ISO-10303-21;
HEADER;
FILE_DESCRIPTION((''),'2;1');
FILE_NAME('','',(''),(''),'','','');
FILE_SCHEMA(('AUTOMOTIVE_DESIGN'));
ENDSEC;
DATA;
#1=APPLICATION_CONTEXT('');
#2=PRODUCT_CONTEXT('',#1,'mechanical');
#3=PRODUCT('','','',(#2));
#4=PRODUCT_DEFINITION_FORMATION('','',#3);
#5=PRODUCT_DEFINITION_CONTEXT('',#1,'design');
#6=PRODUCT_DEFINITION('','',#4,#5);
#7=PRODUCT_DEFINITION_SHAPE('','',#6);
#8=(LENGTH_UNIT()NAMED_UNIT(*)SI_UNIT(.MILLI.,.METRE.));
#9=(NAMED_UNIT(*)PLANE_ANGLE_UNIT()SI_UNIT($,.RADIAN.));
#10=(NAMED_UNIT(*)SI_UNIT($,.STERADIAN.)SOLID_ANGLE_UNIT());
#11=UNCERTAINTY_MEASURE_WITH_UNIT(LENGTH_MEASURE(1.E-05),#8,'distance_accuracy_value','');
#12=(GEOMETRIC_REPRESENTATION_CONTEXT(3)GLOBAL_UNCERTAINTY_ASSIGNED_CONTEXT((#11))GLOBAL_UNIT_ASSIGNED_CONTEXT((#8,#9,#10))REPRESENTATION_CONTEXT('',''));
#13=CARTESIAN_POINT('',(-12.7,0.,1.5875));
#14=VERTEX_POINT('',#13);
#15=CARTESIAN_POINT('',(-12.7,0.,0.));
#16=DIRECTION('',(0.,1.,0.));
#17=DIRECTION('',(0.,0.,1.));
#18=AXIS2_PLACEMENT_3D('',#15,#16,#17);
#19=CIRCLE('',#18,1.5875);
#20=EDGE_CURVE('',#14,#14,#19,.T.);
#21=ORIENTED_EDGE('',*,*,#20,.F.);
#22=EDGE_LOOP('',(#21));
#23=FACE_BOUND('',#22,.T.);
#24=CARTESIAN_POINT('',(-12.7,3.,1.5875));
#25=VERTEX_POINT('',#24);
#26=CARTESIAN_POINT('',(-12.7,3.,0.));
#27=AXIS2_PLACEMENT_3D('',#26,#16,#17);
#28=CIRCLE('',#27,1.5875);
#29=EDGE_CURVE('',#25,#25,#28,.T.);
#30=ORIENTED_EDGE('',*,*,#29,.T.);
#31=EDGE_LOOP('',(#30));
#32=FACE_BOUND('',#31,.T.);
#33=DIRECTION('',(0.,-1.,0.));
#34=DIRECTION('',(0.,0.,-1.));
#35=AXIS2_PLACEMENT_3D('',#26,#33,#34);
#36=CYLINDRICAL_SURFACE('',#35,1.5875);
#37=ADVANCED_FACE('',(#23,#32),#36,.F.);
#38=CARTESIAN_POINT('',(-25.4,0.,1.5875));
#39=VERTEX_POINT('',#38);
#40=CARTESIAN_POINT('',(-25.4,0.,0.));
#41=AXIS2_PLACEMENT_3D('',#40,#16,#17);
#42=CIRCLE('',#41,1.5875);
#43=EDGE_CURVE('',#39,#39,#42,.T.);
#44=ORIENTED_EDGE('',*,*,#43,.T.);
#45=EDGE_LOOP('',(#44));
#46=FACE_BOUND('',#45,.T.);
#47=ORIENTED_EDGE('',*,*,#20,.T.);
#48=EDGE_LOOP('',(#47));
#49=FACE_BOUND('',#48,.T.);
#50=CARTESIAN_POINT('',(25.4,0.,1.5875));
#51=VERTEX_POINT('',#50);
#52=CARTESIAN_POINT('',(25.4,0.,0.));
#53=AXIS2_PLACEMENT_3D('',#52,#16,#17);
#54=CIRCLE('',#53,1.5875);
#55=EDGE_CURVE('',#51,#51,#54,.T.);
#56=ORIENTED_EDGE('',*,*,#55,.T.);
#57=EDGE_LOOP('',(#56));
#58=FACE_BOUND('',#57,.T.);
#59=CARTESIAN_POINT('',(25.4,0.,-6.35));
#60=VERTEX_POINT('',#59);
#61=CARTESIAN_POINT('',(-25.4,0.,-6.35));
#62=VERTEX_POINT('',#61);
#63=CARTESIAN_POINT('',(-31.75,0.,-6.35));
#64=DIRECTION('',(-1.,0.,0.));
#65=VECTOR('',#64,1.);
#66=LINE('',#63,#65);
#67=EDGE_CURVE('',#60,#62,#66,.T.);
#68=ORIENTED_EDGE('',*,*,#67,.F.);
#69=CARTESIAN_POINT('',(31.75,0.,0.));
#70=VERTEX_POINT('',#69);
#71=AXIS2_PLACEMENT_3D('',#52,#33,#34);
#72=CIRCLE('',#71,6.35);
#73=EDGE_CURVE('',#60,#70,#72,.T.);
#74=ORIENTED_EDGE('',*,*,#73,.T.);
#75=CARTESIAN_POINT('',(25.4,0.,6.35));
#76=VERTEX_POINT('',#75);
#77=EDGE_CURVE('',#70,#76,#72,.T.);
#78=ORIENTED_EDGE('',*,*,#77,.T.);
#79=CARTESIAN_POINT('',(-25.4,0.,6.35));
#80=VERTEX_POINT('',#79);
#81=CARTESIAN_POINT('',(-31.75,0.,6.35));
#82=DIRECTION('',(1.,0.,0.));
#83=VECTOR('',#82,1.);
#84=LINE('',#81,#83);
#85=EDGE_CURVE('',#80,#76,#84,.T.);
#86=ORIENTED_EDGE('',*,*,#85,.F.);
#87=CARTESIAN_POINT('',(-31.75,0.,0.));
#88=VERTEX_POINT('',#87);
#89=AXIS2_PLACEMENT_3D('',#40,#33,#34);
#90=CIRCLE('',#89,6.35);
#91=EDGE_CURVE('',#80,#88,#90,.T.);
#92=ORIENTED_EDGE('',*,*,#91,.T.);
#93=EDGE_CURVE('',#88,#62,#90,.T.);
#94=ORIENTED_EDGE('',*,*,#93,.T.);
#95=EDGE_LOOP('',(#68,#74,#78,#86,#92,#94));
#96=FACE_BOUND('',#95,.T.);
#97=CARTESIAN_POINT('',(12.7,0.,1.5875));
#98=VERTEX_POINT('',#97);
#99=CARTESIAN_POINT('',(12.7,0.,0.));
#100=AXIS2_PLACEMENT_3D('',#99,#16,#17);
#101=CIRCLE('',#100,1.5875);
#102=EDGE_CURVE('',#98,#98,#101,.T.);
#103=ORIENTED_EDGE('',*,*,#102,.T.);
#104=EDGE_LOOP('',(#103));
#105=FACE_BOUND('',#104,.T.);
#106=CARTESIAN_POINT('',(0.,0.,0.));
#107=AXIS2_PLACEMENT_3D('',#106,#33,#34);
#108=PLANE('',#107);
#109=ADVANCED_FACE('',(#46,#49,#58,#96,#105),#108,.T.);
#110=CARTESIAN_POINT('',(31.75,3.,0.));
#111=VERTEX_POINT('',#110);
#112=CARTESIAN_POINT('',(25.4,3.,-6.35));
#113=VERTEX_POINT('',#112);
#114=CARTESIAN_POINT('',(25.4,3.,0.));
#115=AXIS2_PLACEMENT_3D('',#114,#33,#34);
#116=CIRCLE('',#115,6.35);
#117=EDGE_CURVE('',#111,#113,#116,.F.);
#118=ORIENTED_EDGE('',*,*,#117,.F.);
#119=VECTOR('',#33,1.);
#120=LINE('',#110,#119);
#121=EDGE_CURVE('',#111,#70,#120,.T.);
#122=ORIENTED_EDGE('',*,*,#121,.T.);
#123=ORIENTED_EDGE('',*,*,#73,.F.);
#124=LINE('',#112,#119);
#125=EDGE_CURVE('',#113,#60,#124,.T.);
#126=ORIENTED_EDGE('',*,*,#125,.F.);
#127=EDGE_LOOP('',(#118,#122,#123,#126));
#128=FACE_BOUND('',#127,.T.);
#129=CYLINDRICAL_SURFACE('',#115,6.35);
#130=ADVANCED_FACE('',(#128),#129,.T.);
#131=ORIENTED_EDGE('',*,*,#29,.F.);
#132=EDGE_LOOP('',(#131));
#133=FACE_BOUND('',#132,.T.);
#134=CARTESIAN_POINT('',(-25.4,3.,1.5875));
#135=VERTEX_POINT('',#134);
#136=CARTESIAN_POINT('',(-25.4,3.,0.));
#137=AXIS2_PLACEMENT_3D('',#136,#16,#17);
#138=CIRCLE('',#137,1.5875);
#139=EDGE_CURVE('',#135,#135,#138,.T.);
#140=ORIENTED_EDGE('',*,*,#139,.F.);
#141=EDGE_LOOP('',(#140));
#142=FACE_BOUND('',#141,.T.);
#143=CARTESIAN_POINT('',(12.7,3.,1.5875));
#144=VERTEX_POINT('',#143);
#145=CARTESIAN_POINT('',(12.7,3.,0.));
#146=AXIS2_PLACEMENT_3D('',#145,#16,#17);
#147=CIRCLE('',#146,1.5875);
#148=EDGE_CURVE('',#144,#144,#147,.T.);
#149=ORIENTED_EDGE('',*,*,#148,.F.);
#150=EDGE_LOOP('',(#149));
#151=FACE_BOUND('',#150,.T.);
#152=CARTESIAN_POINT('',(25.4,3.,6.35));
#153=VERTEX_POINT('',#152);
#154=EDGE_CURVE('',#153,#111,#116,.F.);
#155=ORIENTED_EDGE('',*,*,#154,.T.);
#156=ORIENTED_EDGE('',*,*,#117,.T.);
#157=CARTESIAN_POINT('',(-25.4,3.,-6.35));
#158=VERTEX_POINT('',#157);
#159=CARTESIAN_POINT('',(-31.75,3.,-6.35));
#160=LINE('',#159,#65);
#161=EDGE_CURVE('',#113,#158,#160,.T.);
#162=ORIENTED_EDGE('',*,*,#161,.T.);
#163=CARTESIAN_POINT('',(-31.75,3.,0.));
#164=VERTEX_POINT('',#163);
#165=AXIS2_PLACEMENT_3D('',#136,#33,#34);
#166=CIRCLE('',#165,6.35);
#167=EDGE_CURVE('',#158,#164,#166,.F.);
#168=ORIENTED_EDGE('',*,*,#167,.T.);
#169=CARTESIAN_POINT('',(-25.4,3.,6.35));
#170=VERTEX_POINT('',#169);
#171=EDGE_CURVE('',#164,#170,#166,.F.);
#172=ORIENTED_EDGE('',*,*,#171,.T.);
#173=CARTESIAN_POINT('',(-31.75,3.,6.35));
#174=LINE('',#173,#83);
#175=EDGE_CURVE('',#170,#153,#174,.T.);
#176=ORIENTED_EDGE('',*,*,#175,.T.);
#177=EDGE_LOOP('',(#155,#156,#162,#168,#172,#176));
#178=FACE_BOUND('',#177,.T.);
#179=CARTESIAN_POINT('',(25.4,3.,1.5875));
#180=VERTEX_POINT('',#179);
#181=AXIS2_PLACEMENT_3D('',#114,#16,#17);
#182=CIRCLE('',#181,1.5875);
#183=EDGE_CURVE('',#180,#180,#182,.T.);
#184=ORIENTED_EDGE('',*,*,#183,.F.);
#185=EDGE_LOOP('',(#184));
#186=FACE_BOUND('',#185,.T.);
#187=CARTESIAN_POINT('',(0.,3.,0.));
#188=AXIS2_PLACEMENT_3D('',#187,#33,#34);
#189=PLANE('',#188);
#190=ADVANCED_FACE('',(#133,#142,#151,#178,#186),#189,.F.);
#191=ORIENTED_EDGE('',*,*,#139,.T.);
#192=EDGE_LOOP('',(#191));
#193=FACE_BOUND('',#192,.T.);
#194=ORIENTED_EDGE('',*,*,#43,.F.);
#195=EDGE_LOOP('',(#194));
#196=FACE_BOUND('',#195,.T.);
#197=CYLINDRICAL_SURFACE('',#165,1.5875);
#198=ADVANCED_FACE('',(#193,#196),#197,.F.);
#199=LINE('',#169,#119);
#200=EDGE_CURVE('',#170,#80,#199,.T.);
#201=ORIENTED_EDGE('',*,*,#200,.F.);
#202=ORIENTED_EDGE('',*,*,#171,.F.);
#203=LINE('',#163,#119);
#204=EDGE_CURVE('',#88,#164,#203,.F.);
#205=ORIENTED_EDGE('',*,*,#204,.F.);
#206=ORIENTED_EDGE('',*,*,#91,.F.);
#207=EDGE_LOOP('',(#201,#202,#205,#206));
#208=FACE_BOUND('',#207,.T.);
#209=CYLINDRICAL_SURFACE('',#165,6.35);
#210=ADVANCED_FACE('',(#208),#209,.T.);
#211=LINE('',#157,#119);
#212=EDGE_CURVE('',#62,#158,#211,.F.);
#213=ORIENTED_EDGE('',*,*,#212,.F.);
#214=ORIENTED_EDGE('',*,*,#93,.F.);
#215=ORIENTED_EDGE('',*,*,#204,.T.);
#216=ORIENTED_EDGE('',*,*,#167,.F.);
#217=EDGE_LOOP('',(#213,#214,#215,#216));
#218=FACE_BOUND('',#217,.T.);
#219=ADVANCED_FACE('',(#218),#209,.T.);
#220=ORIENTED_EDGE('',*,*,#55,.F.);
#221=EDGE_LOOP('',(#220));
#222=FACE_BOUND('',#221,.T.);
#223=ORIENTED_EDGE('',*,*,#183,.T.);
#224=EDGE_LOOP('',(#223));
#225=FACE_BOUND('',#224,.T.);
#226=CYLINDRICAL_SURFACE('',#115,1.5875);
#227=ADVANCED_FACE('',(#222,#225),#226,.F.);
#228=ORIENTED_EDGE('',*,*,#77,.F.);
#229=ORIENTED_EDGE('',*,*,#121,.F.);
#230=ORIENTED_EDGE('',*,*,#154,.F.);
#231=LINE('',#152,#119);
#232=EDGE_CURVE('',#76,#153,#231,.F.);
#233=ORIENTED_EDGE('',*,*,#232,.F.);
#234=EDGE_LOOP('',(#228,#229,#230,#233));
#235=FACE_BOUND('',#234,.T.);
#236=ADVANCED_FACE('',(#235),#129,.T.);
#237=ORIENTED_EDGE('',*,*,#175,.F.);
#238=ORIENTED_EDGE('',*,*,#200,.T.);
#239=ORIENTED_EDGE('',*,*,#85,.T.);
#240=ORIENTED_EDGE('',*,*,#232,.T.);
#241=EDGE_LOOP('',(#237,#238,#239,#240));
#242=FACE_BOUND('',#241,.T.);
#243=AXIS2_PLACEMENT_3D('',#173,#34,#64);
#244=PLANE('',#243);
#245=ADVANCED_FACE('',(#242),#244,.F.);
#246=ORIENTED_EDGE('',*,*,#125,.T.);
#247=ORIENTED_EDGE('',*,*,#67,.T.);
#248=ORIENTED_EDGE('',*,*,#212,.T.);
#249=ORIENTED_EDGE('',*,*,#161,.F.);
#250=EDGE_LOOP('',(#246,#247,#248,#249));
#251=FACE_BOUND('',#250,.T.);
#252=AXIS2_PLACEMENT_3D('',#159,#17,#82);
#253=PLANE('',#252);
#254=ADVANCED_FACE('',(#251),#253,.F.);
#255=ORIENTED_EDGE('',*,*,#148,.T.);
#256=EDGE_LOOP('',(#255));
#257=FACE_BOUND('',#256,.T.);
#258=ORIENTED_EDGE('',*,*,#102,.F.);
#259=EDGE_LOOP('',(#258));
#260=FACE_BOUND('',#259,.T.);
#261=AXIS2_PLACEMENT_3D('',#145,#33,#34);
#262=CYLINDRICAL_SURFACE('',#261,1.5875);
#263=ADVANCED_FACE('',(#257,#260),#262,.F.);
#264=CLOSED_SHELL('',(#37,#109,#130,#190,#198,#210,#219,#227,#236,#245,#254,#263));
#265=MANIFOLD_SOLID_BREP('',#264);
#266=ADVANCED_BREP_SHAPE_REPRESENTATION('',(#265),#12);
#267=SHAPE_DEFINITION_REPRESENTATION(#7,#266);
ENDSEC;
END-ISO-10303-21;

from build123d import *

# Parameters (mm, degrees)
SKETCH1_W           = 63.5
SKETCH1_H           = 12.7
SKETCH1_R           = 1.5875
BOSS_EXTRUDE1_DEPTH = 3
FILLET1_R           = 6.35


with BuildPart() as part:
    # Sketch1 → Boss-Extrude1 (new body)
    with BuildSketch(Plane(origin=(0, 0, 0), x_dir=(1, 0, 0), z_dir=(0, 1, 0))):
        Rectangle(SKETCH1_W, SKETCH1_H)
        with Locations(Location((-12.7, 0, 0), (0, 0, 270))):
            Circle(SKETCH1_R, mode=Mode.SUBTRACT)
        with Locations(Location((12.7, 0, 0), (0, 0, 270))):
            Circle(SKETCH1_R, mode=Mode.SUBTRACT)
        with Locations(Location((25.4, 0, 0), (0, 0, 270))):
            Circle(SKETCH1_R, mode=Mode.SUBTRACT)
        with Locations(Location((-25.4, 0, 0), (0, 0, 270))):
            Circle(SKETCH1_R, mode=Mode.SUBTRACT)
    extrude(amount=BOSS_EXTRUDE1_DEPTH)

    # Fillet1
    fillet1_edges = [part.edges().sort_by_distance(p)[0] for p in [
        (-31.75, 1.5, -6.35),
        (-31.75, 1.5, 6.35),
        (31.75, 1.5, -6.35),
        (31.75, 1.5, 6.35),
    ]]
    fillet(fillet1_edges, radius=FILLET1_R - 0.0001)  # a hair under: the kernel refuses the full size


solid = part.part
